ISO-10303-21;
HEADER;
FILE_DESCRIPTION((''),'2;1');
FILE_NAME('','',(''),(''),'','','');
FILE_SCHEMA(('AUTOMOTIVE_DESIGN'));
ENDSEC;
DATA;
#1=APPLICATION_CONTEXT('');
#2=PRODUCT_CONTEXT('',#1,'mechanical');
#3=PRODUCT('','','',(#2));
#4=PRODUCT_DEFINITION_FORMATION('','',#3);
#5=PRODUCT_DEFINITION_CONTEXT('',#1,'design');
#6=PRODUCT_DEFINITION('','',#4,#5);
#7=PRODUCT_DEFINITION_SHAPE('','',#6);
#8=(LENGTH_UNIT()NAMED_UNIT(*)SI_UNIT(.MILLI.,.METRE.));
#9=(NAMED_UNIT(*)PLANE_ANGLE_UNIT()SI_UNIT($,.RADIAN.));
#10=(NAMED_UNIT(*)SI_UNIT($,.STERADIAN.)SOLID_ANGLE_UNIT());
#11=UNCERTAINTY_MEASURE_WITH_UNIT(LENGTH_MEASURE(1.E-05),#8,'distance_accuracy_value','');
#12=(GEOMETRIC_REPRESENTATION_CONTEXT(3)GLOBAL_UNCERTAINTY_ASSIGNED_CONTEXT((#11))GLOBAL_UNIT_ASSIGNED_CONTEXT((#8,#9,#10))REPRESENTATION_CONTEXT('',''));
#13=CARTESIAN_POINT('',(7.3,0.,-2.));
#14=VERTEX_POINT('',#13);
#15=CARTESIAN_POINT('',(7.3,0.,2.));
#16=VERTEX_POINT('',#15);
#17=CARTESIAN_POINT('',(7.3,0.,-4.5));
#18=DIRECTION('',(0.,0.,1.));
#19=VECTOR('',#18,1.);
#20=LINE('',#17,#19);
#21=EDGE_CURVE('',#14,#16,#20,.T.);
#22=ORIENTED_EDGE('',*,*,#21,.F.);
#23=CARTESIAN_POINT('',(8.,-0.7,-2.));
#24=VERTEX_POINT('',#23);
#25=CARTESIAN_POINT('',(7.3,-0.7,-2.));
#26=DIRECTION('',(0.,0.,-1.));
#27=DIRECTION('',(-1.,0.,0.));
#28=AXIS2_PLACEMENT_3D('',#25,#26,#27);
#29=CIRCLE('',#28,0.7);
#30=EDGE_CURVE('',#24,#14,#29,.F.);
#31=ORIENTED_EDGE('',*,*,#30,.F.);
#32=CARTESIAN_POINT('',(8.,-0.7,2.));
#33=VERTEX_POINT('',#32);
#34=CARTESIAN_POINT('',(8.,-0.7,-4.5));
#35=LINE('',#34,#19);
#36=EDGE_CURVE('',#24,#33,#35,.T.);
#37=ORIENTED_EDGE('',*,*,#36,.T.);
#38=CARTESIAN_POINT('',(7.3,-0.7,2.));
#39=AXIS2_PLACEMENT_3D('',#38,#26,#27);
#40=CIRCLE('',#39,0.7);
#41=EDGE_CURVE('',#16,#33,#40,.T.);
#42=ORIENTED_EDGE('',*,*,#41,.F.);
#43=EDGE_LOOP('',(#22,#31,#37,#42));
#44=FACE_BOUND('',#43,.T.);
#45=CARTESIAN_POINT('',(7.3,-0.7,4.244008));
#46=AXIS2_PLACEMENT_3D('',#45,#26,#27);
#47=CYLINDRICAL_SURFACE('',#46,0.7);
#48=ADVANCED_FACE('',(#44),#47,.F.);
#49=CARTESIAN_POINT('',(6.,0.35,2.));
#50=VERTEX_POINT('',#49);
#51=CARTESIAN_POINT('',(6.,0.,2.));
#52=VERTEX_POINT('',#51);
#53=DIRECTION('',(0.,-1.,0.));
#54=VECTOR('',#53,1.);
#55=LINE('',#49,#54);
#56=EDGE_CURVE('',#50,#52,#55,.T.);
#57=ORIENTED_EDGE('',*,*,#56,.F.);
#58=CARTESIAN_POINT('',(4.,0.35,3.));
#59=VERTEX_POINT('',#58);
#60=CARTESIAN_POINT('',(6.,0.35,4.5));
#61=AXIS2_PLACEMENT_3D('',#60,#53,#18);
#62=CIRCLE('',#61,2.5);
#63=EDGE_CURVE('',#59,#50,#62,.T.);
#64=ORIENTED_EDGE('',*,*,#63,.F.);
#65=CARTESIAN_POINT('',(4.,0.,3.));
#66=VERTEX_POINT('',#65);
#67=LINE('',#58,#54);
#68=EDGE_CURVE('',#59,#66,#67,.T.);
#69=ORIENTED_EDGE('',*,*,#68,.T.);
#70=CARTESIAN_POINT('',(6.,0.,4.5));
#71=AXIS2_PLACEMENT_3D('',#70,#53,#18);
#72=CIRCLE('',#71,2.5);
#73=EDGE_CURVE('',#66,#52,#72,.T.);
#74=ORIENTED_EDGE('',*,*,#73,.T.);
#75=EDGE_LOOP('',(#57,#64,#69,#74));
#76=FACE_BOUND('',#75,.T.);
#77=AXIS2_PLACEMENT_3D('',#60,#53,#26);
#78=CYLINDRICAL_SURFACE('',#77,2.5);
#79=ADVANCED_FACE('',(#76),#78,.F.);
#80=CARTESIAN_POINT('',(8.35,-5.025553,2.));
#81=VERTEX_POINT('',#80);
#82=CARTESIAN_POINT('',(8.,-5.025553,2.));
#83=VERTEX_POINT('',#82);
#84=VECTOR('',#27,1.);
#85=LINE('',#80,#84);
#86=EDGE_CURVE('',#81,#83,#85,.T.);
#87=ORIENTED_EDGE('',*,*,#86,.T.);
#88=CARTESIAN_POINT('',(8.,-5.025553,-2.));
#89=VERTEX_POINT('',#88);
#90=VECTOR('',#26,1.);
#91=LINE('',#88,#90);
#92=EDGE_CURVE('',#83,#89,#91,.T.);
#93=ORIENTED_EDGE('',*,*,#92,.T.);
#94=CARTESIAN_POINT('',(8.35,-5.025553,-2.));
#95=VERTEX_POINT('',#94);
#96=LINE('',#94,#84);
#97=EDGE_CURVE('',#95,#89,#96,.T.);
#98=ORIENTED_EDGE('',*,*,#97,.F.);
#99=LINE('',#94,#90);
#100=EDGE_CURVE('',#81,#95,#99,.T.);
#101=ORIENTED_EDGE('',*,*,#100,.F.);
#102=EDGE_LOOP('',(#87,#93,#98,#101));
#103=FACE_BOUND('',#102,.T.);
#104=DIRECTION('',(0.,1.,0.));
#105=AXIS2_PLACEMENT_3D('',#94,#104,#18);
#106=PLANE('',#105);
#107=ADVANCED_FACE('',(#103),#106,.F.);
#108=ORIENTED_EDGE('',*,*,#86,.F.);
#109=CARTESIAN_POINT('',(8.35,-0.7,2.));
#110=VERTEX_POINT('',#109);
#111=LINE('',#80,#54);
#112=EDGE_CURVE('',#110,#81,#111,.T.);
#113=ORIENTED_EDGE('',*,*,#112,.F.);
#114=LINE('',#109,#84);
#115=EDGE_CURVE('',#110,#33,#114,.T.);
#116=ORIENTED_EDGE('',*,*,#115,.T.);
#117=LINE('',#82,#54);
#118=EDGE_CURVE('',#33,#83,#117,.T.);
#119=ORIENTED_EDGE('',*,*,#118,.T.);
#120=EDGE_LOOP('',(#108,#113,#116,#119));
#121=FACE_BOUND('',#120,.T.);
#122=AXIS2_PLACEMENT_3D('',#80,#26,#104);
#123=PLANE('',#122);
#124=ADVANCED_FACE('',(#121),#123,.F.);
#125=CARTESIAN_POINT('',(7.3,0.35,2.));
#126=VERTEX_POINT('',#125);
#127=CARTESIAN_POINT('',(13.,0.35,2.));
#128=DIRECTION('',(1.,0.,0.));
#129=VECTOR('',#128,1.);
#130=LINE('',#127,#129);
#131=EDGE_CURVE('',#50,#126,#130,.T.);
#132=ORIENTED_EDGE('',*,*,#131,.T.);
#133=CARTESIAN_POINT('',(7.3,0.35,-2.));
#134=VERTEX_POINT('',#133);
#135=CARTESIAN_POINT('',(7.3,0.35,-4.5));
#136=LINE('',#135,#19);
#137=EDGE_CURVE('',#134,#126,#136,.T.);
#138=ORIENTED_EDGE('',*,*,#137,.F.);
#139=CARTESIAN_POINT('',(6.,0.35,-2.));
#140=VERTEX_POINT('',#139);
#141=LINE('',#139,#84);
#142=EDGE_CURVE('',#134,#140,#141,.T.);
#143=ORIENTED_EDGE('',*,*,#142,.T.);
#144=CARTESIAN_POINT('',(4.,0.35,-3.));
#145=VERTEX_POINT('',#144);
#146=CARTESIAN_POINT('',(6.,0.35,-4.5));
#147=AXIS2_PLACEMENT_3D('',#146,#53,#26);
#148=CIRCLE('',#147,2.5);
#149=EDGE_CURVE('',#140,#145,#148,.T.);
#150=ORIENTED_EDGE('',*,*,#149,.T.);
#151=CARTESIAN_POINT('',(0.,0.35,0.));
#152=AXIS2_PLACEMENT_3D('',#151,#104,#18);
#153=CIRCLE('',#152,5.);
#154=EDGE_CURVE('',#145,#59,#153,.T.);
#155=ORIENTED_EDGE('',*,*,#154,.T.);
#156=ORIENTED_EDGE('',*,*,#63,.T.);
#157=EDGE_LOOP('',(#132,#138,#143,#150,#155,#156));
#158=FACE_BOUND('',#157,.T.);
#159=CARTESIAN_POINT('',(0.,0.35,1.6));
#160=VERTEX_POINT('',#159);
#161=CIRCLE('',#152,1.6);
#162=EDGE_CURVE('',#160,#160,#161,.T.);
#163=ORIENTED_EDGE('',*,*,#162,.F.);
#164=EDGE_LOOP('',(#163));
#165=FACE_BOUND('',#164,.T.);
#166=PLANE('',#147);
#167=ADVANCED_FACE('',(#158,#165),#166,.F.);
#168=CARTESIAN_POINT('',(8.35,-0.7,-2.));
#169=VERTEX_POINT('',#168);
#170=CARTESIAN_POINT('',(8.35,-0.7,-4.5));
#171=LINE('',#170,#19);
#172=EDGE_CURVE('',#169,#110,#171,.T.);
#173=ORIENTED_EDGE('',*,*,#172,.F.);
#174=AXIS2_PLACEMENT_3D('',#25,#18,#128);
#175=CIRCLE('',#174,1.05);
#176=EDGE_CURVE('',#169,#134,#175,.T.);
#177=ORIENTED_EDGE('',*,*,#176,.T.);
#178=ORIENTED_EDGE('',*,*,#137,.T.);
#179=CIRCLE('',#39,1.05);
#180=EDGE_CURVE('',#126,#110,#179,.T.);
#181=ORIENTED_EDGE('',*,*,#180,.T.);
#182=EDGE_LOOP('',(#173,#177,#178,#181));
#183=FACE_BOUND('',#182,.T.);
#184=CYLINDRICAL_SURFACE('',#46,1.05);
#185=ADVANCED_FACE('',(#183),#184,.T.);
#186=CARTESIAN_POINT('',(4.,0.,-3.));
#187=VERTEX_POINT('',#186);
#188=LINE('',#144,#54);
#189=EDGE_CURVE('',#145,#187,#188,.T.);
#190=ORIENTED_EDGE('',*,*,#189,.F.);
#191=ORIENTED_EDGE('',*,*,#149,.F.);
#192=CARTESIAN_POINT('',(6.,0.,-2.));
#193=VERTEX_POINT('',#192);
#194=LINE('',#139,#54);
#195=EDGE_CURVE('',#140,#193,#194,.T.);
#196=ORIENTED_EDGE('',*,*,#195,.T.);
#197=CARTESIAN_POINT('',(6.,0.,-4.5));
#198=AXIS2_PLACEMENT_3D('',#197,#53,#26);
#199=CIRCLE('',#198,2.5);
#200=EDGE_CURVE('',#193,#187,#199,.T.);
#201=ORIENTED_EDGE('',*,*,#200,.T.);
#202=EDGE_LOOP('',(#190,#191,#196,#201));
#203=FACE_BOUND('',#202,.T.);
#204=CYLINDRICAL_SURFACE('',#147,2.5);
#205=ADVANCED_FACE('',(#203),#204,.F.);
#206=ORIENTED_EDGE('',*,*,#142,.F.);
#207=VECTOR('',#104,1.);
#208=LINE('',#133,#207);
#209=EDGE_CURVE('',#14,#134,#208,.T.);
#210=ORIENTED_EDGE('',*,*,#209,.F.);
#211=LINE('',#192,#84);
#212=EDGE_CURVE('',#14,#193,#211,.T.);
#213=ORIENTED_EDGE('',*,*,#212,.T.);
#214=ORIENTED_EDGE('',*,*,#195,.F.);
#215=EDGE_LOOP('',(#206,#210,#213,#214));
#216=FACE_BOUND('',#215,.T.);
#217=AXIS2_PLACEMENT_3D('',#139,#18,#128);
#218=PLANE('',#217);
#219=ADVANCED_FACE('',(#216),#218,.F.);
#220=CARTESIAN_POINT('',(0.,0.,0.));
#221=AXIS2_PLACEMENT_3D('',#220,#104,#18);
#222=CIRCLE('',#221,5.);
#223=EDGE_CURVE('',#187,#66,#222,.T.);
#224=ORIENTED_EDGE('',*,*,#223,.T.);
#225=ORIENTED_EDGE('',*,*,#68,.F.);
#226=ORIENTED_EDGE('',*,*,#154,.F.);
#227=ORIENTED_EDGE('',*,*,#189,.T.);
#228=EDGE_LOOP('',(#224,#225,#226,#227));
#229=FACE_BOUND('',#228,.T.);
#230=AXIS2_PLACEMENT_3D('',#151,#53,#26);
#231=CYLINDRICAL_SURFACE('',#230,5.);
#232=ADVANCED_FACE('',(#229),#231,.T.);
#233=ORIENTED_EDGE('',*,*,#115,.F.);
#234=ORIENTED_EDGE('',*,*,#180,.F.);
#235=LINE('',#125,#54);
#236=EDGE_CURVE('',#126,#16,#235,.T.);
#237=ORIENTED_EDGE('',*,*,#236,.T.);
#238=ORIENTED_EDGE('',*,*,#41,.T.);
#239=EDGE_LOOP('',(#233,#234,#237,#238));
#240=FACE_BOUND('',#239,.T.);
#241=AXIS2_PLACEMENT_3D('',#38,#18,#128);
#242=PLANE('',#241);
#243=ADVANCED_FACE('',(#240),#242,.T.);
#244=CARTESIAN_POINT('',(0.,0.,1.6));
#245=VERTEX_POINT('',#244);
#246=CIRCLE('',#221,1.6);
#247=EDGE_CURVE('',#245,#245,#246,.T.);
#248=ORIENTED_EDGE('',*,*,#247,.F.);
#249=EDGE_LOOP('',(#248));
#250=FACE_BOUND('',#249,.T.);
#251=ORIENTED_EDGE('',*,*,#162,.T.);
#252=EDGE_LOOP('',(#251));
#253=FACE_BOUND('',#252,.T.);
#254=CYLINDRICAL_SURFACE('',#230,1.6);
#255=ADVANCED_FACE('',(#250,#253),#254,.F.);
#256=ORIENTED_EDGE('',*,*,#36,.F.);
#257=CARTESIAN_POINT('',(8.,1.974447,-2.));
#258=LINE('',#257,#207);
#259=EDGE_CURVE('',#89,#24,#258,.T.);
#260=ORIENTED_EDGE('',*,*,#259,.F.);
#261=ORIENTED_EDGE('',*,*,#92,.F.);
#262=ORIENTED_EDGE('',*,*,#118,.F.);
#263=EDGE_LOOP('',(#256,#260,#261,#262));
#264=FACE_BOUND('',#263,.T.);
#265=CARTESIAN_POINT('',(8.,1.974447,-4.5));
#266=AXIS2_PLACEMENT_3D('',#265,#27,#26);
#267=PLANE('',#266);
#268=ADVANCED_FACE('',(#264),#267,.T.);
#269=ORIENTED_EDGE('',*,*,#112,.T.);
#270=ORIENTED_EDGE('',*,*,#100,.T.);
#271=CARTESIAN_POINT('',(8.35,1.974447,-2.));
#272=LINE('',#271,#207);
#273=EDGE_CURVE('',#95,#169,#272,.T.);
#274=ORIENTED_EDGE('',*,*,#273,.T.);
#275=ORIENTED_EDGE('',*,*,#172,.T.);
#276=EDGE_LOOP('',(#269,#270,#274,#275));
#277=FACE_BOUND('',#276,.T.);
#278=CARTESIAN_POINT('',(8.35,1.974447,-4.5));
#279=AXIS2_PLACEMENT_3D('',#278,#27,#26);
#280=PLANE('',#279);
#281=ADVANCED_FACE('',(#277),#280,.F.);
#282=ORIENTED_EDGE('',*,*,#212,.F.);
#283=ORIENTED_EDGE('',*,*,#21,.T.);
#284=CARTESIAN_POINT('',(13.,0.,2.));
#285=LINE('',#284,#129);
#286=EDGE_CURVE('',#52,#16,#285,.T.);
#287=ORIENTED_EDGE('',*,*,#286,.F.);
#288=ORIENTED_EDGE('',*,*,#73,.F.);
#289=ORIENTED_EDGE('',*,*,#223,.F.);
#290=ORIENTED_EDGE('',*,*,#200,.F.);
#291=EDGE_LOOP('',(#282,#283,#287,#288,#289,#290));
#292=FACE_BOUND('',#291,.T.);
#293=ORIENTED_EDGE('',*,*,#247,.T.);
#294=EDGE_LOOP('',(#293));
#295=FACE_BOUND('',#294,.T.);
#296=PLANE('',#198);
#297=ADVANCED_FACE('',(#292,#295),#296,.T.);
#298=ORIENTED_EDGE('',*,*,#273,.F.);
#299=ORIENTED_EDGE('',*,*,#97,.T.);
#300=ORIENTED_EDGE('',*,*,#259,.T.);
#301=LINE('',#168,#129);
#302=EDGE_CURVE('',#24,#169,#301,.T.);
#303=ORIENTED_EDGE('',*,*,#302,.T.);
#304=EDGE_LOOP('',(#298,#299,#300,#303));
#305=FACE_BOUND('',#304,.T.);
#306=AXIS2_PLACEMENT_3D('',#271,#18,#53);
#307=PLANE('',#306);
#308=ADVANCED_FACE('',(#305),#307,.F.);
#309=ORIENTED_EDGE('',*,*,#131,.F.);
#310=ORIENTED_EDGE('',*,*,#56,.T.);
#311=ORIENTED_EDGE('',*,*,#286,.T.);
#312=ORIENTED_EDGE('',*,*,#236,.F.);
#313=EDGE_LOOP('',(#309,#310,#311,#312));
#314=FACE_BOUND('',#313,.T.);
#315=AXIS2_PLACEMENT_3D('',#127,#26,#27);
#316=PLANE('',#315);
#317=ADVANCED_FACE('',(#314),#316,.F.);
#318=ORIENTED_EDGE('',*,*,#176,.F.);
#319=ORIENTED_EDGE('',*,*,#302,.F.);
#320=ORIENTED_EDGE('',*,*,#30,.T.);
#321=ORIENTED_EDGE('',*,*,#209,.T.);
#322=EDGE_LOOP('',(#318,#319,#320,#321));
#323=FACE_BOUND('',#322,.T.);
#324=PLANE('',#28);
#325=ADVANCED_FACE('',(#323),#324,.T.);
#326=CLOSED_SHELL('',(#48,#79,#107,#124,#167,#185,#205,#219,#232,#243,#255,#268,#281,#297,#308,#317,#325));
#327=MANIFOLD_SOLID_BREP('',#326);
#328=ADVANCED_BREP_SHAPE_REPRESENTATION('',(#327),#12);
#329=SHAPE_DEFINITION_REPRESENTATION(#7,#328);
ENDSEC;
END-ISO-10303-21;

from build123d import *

# Parameters (mm, degrees)
SKICA1_R               = 1.6
Z_KLADN_PLECH1_DEPTH   = 0.35
OHYB_START             = -2
OHYB_ZE_SKICI1_DEPTH   = 4
OHYB_ZE_SKICI1_2_DEPTH = 4


# Read off the part's stored shape, not the designer's step: Ohyb ze skici1
# Sheet-metal steps are written as plain solids
with BuildPart() as part:
    # Skica1 → Základní plech1 (new body)
    with BuildSketch(Plane(origin=(0, 0, 0), x_dir=(1, 0, 0), z_dir=(0, 1, 0))):
        with BuildLine():
            Line((6, 2), (13, 2))
            Line((13, 2), (13, -2))
            Line((13, -2), (6, -2))
            ThreePointArc((6, -2), (4.881966011, -2.263932023), (4, -3))
            ThreePointArc((4, -3), (-5, 0), (4, 3))
            ThreePointArc((4, 3), (4.881966011, 2.263932023), (6, 2))
        make_face()
        with Locations(Location((0, 0, 0), (0, 0, 270))):
            Circle(SKICA1_R, mode=Mode.SUBTRACT)
    extrude(amount=Z_KLADN_PLECH1_DEPTH)

    # Ohyb ze skici1 outline → Ohyb ze skici1 (cut)
    with BuildSketch(Plane.XY.offset(OHYB_START)):
        with BuildLine():
            ThreePointArc((7.3, 0.350000005), (7.728660709, 0.258514479), (8.082623799, 0))
            Line((8.082623799, 0), (13, 0))
            Line((13, 0), (13, 0.35))
            Line((13, 0.35), (7.3, 0.350000005))
        make_face()
    extrude(amount=OHYB_ZE_SKICI1_DEPTH, mode=Mode.SUBTRACT)

    # Ohyb ze skici1 2 outline → Ohyb ze skici1 2 (add)
    with BuildSketch(Plane.XY.offset(OHYB_START)):
        with BuildLine():
            Line((8.35, -5.025553214), (8.350000005, -0.700000005))
            ThreePointArc((8.350000005, -0.700000005), (8.280880984, -0.325336808), (8.082623799, 0))
            Line((8.082623799, 0), (7.3, 5e-09))
            ThreePointArc((7.3, 5e-09), (7.79497475, -0.20502525), (8.000000005, -0.7))
            Line((8.000000005, -0.7), (8, -5.025553214))
            Line((8, -5.025553214), (8.35, -5.025553214))
        make_face()
    extrude(amount=OHYB_ZE_SKICI1_2_DEPTH)


solid = part.part
